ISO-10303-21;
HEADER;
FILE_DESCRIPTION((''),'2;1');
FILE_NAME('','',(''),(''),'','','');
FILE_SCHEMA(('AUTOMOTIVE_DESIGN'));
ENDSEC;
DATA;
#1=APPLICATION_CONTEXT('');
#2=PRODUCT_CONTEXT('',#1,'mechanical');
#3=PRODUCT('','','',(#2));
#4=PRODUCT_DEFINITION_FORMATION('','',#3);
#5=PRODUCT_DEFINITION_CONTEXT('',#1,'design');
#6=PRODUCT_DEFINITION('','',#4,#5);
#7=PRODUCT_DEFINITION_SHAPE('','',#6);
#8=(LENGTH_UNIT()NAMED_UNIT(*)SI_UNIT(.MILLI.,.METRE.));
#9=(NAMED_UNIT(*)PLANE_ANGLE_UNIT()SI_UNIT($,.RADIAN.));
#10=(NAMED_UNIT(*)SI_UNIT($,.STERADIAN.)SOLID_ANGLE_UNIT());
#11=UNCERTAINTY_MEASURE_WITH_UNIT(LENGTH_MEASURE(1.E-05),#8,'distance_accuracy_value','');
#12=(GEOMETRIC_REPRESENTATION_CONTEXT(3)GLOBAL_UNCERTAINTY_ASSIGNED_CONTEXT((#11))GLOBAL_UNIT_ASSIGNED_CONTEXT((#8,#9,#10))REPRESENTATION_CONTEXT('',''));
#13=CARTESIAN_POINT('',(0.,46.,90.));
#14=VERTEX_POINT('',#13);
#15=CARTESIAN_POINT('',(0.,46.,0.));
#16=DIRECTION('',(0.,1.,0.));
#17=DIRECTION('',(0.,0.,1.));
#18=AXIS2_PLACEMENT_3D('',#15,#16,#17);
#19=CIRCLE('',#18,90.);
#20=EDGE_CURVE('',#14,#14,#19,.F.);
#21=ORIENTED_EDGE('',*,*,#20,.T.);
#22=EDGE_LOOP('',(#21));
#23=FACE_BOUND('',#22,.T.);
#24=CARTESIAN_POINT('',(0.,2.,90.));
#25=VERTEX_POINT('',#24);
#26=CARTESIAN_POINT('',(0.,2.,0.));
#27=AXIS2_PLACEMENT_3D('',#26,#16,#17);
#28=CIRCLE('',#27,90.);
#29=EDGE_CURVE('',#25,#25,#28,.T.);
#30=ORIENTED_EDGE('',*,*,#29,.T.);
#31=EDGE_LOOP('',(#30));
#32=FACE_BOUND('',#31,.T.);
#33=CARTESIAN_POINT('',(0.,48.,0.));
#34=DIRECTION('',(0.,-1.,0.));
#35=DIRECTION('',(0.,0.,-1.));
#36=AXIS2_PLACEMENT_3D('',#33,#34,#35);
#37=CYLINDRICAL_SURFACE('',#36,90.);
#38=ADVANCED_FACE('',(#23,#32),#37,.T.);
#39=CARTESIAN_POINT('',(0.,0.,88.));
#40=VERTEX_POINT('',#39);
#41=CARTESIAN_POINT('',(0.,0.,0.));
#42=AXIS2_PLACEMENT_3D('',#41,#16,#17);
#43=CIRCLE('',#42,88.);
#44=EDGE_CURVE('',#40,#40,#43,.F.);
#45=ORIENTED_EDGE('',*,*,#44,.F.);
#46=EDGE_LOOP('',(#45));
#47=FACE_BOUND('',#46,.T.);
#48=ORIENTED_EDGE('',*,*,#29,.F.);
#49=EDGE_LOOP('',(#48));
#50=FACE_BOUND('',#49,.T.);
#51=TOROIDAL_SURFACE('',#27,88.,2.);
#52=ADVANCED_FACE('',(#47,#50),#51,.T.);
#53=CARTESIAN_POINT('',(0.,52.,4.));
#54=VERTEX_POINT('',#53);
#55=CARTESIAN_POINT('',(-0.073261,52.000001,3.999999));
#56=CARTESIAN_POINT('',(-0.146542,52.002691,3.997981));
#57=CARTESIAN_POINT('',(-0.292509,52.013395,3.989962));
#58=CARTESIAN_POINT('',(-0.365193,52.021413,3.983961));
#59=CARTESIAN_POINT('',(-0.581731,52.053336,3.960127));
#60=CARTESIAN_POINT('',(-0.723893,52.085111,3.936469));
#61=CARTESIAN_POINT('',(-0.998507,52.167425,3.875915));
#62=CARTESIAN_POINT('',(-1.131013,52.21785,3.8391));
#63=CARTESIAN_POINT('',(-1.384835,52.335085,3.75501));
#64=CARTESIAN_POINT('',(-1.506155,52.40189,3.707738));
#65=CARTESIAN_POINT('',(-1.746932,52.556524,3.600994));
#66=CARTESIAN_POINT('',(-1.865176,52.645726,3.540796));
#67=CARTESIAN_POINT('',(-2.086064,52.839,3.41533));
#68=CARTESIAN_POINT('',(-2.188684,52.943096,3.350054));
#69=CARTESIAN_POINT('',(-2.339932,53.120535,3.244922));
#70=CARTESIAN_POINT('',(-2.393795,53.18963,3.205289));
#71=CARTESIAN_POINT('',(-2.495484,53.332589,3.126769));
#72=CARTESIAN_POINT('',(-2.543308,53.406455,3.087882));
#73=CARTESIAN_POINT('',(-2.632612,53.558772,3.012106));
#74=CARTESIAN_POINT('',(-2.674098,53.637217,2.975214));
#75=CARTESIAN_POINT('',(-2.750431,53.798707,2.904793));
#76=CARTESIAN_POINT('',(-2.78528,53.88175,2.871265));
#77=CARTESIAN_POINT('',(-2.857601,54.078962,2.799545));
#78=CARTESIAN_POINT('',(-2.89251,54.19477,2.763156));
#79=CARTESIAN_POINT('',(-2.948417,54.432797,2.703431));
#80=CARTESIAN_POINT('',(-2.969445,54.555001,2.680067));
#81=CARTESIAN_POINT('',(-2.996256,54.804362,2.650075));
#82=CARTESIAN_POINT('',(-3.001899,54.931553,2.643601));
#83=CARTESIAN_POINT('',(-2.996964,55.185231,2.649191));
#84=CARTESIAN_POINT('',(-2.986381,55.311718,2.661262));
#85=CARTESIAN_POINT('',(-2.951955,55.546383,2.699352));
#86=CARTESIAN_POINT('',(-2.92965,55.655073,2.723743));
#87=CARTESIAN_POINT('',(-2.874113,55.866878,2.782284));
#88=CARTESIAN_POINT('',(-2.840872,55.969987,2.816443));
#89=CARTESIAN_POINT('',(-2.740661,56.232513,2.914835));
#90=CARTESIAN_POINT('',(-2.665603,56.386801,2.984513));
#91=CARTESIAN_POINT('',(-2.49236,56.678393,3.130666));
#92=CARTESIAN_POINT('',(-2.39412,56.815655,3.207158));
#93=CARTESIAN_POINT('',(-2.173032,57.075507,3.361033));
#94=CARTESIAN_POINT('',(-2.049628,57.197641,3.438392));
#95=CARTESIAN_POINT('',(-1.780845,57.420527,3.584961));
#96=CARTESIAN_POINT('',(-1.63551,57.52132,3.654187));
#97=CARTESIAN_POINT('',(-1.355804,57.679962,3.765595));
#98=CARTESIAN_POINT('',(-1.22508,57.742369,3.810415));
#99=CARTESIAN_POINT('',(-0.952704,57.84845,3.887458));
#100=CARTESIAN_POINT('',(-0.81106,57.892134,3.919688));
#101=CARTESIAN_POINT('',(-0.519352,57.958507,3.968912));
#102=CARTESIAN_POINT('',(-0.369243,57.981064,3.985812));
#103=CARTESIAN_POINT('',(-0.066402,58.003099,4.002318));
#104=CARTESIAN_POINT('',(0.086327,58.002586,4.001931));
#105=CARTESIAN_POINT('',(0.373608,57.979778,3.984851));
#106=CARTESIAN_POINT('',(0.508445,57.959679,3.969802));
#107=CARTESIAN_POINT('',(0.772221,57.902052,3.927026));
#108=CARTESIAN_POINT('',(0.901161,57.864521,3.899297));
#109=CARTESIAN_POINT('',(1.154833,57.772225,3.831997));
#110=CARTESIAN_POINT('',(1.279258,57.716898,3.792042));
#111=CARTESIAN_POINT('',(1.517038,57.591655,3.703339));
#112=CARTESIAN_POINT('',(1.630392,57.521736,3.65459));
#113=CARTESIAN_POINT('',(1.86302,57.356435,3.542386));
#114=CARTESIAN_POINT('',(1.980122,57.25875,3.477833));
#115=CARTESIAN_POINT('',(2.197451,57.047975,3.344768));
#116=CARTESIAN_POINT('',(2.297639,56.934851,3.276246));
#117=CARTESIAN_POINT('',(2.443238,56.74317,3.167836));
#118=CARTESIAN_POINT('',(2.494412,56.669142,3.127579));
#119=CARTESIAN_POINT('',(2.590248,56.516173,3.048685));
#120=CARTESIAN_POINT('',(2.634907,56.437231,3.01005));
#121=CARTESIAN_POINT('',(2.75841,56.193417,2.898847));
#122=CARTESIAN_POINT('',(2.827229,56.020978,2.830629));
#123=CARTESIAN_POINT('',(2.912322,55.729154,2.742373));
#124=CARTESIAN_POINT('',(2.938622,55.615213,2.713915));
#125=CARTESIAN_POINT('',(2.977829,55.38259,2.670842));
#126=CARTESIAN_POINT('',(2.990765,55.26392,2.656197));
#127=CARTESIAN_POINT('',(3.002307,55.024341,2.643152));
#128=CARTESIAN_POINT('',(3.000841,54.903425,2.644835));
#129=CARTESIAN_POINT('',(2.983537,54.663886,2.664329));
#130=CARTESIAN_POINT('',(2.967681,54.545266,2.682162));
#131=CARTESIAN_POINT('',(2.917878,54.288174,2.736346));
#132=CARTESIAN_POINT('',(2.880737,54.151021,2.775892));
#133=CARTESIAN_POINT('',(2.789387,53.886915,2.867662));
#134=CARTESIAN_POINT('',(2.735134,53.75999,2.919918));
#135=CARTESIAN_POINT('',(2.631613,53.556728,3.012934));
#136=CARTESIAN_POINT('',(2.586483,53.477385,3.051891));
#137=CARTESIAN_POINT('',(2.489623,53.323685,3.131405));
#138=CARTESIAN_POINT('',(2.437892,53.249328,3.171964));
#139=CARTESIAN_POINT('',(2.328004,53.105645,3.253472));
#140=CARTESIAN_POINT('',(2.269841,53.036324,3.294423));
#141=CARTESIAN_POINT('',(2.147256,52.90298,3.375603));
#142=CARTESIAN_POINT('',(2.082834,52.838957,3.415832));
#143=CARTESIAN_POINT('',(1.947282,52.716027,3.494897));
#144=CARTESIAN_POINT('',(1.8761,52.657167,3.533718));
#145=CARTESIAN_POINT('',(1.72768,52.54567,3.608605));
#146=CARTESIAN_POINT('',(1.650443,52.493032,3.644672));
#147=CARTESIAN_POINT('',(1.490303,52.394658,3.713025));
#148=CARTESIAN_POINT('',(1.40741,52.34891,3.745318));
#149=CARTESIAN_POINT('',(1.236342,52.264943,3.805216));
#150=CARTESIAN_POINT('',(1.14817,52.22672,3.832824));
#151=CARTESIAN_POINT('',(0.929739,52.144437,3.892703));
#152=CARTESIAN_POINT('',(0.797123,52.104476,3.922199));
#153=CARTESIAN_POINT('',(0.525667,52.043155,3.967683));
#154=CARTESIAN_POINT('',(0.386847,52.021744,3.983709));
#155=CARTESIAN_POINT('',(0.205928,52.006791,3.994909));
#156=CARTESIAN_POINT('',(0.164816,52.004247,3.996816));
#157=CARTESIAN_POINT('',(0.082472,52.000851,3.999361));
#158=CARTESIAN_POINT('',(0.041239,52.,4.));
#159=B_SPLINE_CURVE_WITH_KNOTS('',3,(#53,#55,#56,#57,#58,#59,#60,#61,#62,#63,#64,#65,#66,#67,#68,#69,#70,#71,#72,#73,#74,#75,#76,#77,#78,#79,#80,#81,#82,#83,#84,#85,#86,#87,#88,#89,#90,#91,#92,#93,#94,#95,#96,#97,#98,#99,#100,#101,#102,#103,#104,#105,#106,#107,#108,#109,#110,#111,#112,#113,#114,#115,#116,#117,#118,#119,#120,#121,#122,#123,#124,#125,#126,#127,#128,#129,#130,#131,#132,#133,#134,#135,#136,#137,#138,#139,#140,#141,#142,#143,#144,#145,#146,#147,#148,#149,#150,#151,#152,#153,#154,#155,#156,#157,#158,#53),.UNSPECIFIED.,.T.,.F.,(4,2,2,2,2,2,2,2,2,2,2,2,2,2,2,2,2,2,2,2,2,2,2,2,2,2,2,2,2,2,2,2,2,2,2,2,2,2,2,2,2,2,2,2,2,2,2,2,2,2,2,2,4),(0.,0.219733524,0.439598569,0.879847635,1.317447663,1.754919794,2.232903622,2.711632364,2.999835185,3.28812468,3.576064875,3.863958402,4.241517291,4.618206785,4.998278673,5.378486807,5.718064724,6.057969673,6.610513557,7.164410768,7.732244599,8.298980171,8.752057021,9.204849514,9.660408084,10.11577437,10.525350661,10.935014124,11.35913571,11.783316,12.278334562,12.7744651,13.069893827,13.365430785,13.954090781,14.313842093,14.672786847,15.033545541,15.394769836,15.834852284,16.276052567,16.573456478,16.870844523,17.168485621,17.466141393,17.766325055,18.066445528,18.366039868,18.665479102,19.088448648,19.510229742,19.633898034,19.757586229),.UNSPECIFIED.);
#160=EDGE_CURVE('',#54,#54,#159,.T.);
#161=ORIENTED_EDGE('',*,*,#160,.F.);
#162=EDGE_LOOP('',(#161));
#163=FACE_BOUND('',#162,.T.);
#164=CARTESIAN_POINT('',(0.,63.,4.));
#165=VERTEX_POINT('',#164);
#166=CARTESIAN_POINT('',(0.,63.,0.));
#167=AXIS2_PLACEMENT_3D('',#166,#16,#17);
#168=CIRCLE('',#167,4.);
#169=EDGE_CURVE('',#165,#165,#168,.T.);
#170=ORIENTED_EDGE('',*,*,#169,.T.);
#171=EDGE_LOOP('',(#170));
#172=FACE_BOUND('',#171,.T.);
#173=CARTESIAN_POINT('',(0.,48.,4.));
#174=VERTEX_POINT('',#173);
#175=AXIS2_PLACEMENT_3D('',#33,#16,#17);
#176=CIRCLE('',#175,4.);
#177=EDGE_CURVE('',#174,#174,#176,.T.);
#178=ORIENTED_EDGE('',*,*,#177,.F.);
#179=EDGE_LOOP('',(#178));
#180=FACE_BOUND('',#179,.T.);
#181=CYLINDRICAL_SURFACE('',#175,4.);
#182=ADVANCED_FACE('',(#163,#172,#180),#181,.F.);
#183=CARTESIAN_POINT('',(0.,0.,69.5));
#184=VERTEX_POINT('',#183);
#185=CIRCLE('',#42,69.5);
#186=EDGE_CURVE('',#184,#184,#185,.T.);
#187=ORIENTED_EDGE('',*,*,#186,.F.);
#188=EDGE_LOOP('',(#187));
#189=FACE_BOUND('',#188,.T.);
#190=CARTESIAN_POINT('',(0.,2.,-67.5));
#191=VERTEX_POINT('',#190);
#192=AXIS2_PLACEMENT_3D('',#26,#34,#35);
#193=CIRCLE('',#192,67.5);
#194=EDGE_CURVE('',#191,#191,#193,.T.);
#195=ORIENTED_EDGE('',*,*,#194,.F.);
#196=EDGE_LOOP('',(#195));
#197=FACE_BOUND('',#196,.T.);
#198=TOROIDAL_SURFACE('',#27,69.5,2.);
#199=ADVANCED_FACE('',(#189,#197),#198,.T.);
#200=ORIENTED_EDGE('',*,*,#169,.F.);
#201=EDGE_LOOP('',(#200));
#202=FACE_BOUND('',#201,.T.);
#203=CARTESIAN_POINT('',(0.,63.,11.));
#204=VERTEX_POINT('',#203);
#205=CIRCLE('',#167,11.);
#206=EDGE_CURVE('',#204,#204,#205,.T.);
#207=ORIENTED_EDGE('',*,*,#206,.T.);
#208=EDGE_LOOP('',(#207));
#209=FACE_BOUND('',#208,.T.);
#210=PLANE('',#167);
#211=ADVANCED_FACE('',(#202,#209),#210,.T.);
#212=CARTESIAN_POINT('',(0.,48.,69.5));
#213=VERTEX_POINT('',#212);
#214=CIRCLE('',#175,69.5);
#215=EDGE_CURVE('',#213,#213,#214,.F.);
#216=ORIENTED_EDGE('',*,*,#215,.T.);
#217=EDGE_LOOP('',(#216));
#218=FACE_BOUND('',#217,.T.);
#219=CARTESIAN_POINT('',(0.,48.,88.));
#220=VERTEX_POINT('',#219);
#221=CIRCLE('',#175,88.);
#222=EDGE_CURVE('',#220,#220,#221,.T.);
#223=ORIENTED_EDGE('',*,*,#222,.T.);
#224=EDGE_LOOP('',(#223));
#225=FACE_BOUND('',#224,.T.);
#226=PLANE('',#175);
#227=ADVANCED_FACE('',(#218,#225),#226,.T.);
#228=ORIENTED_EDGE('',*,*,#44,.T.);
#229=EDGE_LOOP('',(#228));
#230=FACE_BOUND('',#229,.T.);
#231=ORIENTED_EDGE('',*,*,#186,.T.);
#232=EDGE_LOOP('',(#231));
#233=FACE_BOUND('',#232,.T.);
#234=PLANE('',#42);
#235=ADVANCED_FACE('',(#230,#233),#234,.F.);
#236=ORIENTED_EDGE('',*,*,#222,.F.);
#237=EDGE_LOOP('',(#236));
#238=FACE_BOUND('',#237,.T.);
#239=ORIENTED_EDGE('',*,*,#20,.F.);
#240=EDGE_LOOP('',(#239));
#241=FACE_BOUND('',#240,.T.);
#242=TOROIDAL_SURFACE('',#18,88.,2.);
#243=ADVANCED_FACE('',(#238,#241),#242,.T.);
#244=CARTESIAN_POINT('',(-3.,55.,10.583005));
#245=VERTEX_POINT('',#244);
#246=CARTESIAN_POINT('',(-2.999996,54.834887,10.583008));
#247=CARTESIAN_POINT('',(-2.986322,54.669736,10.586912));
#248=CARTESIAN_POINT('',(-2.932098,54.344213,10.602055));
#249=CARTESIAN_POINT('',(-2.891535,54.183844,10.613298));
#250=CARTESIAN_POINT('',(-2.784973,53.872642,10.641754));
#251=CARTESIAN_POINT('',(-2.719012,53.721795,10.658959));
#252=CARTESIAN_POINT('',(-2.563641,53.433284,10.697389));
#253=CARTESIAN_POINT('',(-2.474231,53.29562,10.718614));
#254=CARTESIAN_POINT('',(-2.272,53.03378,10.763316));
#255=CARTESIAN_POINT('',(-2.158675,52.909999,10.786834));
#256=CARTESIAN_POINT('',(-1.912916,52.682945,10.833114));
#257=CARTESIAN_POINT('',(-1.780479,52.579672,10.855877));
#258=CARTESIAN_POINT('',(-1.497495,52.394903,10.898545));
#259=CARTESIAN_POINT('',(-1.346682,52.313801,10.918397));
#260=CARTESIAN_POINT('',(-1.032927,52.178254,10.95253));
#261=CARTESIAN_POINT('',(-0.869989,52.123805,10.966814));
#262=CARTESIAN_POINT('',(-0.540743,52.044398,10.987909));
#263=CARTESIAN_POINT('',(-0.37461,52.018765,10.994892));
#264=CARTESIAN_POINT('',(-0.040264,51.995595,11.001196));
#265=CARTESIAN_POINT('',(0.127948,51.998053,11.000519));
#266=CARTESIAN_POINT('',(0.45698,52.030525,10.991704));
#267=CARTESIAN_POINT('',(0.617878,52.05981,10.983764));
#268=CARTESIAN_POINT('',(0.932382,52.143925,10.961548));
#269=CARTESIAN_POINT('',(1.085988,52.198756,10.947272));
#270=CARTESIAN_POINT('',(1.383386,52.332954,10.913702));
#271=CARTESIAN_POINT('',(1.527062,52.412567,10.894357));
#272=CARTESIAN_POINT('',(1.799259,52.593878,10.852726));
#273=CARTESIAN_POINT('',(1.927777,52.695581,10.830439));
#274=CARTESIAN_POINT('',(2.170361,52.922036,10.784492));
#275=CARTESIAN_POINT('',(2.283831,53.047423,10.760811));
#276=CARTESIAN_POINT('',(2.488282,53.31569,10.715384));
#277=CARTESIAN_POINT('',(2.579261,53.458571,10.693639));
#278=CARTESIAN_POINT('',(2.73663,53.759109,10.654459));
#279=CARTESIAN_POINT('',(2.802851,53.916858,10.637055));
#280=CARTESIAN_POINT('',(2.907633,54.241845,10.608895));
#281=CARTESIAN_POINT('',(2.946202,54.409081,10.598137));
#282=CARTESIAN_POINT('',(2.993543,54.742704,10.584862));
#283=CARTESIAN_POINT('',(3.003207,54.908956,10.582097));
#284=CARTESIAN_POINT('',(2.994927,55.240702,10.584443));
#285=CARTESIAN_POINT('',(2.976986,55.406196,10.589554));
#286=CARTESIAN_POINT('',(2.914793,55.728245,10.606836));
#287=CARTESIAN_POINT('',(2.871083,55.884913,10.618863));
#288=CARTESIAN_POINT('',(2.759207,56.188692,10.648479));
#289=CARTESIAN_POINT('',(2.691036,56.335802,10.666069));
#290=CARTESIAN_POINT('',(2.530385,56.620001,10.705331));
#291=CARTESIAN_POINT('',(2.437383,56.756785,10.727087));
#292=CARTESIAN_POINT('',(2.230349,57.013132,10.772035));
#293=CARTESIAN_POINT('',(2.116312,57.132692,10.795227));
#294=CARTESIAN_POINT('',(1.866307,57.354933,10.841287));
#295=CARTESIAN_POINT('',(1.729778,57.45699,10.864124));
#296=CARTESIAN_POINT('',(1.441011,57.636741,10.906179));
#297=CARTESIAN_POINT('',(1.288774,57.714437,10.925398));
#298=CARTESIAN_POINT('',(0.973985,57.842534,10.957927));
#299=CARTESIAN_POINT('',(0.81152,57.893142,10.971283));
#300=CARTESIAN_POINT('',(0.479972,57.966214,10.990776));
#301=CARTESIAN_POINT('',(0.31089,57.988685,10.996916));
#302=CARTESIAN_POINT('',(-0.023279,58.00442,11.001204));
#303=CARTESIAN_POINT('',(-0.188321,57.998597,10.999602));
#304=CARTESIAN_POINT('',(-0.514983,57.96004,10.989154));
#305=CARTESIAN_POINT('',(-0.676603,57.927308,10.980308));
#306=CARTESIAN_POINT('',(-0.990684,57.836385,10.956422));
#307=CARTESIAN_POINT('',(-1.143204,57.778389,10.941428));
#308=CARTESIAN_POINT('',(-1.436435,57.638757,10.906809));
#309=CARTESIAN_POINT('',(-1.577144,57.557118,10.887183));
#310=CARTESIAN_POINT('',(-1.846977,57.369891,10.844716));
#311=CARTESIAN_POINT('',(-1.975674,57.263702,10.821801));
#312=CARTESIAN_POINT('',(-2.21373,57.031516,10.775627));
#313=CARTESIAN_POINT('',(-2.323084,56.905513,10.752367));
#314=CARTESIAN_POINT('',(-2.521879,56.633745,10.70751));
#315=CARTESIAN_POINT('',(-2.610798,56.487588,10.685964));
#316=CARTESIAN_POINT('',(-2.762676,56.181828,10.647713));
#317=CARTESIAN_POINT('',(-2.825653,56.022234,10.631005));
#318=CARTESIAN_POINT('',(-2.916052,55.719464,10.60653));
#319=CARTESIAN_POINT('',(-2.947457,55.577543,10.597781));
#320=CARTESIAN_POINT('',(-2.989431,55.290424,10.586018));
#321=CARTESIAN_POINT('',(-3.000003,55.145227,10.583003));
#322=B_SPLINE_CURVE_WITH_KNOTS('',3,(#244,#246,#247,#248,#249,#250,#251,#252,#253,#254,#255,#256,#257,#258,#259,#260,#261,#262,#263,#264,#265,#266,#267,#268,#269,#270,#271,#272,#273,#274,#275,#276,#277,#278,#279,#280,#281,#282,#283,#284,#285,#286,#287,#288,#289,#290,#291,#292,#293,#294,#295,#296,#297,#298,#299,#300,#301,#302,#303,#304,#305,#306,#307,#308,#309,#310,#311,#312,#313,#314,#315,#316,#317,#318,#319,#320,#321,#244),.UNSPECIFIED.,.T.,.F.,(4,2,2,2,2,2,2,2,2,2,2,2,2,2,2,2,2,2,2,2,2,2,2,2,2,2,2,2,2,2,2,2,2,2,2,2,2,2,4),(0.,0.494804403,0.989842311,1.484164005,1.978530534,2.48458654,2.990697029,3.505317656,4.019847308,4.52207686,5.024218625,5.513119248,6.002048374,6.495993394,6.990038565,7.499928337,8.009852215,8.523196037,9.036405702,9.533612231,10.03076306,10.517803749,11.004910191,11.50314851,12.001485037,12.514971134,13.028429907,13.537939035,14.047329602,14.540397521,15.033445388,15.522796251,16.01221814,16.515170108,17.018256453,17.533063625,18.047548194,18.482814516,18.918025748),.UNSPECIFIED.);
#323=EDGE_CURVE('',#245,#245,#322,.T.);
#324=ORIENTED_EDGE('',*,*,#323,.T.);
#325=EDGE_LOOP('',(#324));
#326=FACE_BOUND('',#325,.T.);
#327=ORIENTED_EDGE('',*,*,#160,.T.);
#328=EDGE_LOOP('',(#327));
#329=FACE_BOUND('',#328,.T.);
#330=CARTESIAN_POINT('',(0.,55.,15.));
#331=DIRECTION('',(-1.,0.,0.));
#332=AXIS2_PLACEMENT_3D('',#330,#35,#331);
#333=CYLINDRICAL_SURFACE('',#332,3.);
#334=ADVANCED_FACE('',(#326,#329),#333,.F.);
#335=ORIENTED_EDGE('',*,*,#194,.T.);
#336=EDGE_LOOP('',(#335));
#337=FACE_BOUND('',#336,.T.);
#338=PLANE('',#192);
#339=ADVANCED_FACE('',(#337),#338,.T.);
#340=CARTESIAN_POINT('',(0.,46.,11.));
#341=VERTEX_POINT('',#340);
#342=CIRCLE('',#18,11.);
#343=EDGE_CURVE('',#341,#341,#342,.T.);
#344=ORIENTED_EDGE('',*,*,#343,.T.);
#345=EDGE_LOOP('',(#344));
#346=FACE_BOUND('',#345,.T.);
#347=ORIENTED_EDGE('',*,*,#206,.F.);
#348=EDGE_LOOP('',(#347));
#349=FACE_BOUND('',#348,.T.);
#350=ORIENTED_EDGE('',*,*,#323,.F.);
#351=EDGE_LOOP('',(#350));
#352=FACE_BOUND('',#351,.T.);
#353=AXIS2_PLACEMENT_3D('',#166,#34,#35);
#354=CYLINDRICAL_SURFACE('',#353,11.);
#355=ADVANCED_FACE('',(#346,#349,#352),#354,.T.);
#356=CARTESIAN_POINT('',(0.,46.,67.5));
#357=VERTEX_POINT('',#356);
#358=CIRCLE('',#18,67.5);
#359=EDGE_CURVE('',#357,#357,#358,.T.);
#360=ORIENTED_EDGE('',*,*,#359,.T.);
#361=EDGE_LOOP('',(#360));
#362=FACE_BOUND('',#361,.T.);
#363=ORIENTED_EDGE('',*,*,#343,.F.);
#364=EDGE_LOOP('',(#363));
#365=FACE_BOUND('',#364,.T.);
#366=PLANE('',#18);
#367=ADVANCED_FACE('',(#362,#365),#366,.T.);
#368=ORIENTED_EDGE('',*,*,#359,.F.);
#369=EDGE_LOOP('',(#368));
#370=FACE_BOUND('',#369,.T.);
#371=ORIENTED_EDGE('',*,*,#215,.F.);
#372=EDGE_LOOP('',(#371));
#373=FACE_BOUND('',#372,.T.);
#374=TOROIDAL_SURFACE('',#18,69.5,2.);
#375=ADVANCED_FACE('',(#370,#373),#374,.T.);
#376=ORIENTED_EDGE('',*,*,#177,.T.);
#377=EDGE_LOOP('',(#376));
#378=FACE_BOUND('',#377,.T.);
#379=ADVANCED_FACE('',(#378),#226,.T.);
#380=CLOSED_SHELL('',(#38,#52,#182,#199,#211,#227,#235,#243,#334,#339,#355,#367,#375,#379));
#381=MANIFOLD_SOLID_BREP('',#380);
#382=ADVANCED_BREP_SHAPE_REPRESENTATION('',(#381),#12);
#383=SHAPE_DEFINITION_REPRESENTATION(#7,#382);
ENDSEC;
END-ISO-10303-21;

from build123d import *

# Parameters (mm, degrees)
SKETCH2_R           = 90
BOSS_EXTRUDE1_DEPTH = 48
SKETCH3_R           = 67.5
CUT_EXTRUDE1_DEPTH  = 2
CUT_EXTRUDE2_START  = -2
SKETCH4_R           = 67.5
CUT_EXTRUDE2_DEPTH  = 2
FILLET1_R           = 2
SKETCH_1_R          = 11
EXTRUDE_1_DEPTH     = 17
SKETCH_2_R          = 4
CUT_EXTRUDE_1_DEPTH = 15
SKETCH_3_R          = 3
CUT_EXTRUDE_2_DEPTH = 15


with BuildPart() as part:
    # Sketch2 → Boss-Extrude1 (new body)
    with BuildSketch(Plane(origin=(0, 0, 0), x_dir=(1, 0, 0), z_dir=(0, 1, 0))):
        with Locations(Location((0, 0, 0), (0, 0, 270))):
            Circle(SKETCH2_R)
    extrude(amount=BOSS_EXTRUDE1_DEPTH)

    # Sketch3 → Cut-Extrude1 (cut)
    with BuildSketch(Plane(origin=(0, 48, 0), x_dir=(1, 0, 0), z_dir=(0, 1, 0))):
        with Locations(Location((0, 0, 0), (0, 0, 270))):
            Circle(SKETCH3_R)
    extrude(amount=-CUT_EXTRUDE1_DEPTH, mode=Mode.SUBTRACT)

    # Sketch4 → Cut-Extrude2 (cut)
    with BuildSketch(Plane.XZ.offset(CUT_EXTRUDE2_START)):
        with Locations(Location((0, 0, 0), (0, 0, 90))):
            Circle(SKETCH4_R)
    extrude(amount=CUT_EXTRUDE2_DEPTH, mode=Mode.SUBTRACT)

    # Fillet1
    fillet1_edges = [part.edges().sort_by_distance(p)[0] for p in [
        (0, 0, -67.5),
        (0, 0, -90),
        (0, 48, -90),
        (0, 48, -67.5),
    ]]
    fillet(fillet1_edges, radius=FILLET1_R - 0.0001)  # a hair under: the kernel refuses the full size

    # 草图1 → 凸台-拉伸1 (add)
    with BuildSketch(Plane(origin=(0, 46, 0), x_dir=(1, 0, 0), z_dir=(0, 1, 0))):
        with Locations(Location((0, 0, 0), (0, 0, 270))):
            Circle(SKETCH_1_R)
    extrude(amount=EXTRUDE_1_DEPTH)

    # 草图2 → 切除-拉伸1 (cut)
    with BuildSketch(Plane(origin=(0, 63, 0), x_dir=(1, 0, 0), z_dir=(0, 1, 0))):
        with Locations(Location((0, 0, 0), (0, 0, 270))):
            Circle(SKETCH_2_R)
    extrude(amount=-CUT_EXTRUDE_1_DEPTH, mode=Mode.SUBTRACT)

    # 草图3 → 切除-拉伸2 (cut)
    with BuildSketch(Plane.XY):
        with Locations(Location((0, 55, 0), (0, 0, 90.000000006))):
            Circle(SKETCH_3_R)
    extrude(amount=CUT_EXTRUDE_2_DEPTH, mode=Mode.SUBTRACT)


solid = part.part
